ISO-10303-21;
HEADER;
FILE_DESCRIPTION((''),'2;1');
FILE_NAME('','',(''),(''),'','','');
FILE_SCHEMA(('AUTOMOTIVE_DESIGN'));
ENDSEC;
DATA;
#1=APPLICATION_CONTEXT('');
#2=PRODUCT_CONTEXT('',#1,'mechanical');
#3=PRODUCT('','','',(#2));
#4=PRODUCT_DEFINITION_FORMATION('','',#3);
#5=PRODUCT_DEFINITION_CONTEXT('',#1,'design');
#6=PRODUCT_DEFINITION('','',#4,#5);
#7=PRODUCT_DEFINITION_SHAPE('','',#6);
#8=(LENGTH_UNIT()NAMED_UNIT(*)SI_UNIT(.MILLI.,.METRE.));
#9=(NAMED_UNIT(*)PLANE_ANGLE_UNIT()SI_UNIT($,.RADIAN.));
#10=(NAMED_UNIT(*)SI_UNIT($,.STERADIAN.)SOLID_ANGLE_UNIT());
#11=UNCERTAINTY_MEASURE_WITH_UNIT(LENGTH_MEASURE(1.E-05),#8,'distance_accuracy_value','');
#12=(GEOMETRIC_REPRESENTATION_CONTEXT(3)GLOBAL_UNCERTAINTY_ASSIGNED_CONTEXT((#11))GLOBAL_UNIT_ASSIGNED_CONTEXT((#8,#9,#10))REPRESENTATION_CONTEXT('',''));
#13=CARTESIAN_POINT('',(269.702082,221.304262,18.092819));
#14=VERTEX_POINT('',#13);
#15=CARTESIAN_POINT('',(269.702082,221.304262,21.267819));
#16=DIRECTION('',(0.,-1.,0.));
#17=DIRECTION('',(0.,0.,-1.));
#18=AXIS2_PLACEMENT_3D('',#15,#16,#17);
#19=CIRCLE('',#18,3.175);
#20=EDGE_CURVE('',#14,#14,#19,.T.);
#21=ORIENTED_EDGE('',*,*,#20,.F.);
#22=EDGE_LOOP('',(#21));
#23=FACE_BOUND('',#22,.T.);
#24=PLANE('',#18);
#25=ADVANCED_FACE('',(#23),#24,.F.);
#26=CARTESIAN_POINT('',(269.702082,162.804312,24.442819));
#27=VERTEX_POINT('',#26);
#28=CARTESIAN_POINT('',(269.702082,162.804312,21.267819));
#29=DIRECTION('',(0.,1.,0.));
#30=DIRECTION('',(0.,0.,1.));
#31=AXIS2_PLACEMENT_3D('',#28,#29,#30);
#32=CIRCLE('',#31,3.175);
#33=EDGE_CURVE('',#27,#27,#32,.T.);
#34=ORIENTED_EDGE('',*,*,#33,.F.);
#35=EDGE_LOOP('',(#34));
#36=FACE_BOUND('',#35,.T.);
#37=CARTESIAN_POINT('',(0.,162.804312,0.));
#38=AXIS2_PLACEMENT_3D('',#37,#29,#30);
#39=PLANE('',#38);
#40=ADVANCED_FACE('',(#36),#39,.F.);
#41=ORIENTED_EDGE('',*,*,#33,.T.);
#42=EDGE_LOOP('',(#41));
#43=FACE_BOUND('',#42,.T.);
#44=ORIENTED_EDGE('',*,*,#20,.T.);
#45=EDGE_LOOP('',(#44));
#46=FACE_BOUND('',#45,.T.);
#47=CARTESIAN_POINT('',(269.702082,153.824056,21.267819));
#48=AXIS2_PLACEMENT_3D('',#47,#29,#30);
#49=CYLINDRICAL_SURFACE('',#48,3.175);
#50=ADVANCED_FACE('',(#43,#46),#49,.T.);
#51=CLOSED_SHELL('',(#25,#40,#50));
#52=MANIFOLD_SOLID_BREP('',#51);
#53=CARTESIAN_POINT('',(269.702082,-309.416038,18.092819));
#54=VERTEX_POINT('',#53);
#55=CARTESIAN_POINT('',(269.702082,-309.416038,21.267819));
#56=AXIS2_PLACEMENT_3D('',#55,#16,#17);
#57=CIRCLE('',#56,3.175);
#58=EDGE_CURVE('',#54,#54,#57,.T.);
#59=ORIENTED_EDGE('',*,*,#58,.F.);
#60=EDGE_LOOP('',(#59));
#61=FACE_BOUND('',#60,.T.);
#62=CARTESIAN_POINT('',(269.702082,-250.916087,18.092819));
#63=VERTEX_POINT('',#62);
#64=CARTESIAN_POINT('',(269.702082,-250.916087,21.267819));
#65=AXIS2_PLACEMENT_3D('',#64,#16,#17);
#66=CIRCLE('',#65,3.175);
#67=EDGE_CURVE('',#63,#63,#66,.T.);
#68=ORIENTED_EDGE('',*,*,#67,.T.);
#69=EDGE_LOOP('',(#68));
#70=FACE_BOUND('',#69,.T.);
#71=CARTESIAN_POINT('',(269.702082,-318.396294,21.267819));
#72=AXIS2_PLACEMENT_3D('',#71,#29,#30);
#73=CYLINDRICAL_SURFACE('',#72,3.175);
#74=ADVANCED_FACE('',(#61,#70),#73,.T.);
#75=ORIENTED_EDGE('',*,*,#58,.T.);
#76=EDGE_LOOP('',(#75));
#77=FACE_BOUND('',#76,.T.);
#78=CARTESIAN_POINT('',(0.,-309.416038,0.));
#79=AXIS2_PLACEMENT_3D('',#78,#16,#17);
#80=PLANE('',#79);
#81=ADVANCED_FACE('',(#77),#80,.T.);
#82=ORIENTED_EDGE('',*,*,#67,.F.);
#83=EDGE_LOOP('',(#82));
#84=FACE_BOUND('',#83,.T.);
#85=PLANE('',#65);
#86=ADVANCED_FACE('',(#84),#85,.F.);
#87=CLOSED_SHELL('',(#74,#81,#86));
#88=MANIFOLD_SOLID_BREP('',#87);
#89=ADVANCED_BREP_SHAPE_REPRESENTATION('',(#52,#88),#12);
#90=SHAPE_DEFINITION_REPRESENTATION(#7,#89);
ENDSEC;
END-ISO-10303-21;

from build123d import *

# Parameters (mm, degrees)
BOSS_EXTRUDE1_OUTLINE_R = 3.175
BOSS_EXTRUDE1_DEPTH     = 58.499950175
SKETCH1_R               = 3.175
BOSS_EXTRUDE2_DEPTH     = 58.499950175


# Read off the part's stored shape, not the designer's step: Boss-Extrude1
with BuildPart() as part:
    # Boss-Extrude1 outline → Boss-Extrude1 (new body)
    with BuildSketch(Plane(origin=(0, 221.304262336, 0), x_dir=(-1, 0, 0), z_dir=(0, -1, 0))):
        with Locations((-269.702081562, -21.267819308)):
            Circle(BOSS_EXTRUDE1_OUTLINE_R)
    extrude(amount=BOSS_EXTRUDE1_DEPTH)


with BuildPart() as body_2:
    # Sketch1 → Boss-Extrude2 (new body)
    with BuildSketch(Plane(origin=(0, -250.916087489, 0), x_dir=(-1, 0, 0), z_dir=(0, -1, 0))):
        with Locations(Location((-269.702081562, -21.267819308, 0), (0, 0, 90))):
            Circle(SKETCH1_R)
    extrude(amount=BOSS_EXTRUDE2_DEPTH)


solid = Compound([part.part, body_2.part])
